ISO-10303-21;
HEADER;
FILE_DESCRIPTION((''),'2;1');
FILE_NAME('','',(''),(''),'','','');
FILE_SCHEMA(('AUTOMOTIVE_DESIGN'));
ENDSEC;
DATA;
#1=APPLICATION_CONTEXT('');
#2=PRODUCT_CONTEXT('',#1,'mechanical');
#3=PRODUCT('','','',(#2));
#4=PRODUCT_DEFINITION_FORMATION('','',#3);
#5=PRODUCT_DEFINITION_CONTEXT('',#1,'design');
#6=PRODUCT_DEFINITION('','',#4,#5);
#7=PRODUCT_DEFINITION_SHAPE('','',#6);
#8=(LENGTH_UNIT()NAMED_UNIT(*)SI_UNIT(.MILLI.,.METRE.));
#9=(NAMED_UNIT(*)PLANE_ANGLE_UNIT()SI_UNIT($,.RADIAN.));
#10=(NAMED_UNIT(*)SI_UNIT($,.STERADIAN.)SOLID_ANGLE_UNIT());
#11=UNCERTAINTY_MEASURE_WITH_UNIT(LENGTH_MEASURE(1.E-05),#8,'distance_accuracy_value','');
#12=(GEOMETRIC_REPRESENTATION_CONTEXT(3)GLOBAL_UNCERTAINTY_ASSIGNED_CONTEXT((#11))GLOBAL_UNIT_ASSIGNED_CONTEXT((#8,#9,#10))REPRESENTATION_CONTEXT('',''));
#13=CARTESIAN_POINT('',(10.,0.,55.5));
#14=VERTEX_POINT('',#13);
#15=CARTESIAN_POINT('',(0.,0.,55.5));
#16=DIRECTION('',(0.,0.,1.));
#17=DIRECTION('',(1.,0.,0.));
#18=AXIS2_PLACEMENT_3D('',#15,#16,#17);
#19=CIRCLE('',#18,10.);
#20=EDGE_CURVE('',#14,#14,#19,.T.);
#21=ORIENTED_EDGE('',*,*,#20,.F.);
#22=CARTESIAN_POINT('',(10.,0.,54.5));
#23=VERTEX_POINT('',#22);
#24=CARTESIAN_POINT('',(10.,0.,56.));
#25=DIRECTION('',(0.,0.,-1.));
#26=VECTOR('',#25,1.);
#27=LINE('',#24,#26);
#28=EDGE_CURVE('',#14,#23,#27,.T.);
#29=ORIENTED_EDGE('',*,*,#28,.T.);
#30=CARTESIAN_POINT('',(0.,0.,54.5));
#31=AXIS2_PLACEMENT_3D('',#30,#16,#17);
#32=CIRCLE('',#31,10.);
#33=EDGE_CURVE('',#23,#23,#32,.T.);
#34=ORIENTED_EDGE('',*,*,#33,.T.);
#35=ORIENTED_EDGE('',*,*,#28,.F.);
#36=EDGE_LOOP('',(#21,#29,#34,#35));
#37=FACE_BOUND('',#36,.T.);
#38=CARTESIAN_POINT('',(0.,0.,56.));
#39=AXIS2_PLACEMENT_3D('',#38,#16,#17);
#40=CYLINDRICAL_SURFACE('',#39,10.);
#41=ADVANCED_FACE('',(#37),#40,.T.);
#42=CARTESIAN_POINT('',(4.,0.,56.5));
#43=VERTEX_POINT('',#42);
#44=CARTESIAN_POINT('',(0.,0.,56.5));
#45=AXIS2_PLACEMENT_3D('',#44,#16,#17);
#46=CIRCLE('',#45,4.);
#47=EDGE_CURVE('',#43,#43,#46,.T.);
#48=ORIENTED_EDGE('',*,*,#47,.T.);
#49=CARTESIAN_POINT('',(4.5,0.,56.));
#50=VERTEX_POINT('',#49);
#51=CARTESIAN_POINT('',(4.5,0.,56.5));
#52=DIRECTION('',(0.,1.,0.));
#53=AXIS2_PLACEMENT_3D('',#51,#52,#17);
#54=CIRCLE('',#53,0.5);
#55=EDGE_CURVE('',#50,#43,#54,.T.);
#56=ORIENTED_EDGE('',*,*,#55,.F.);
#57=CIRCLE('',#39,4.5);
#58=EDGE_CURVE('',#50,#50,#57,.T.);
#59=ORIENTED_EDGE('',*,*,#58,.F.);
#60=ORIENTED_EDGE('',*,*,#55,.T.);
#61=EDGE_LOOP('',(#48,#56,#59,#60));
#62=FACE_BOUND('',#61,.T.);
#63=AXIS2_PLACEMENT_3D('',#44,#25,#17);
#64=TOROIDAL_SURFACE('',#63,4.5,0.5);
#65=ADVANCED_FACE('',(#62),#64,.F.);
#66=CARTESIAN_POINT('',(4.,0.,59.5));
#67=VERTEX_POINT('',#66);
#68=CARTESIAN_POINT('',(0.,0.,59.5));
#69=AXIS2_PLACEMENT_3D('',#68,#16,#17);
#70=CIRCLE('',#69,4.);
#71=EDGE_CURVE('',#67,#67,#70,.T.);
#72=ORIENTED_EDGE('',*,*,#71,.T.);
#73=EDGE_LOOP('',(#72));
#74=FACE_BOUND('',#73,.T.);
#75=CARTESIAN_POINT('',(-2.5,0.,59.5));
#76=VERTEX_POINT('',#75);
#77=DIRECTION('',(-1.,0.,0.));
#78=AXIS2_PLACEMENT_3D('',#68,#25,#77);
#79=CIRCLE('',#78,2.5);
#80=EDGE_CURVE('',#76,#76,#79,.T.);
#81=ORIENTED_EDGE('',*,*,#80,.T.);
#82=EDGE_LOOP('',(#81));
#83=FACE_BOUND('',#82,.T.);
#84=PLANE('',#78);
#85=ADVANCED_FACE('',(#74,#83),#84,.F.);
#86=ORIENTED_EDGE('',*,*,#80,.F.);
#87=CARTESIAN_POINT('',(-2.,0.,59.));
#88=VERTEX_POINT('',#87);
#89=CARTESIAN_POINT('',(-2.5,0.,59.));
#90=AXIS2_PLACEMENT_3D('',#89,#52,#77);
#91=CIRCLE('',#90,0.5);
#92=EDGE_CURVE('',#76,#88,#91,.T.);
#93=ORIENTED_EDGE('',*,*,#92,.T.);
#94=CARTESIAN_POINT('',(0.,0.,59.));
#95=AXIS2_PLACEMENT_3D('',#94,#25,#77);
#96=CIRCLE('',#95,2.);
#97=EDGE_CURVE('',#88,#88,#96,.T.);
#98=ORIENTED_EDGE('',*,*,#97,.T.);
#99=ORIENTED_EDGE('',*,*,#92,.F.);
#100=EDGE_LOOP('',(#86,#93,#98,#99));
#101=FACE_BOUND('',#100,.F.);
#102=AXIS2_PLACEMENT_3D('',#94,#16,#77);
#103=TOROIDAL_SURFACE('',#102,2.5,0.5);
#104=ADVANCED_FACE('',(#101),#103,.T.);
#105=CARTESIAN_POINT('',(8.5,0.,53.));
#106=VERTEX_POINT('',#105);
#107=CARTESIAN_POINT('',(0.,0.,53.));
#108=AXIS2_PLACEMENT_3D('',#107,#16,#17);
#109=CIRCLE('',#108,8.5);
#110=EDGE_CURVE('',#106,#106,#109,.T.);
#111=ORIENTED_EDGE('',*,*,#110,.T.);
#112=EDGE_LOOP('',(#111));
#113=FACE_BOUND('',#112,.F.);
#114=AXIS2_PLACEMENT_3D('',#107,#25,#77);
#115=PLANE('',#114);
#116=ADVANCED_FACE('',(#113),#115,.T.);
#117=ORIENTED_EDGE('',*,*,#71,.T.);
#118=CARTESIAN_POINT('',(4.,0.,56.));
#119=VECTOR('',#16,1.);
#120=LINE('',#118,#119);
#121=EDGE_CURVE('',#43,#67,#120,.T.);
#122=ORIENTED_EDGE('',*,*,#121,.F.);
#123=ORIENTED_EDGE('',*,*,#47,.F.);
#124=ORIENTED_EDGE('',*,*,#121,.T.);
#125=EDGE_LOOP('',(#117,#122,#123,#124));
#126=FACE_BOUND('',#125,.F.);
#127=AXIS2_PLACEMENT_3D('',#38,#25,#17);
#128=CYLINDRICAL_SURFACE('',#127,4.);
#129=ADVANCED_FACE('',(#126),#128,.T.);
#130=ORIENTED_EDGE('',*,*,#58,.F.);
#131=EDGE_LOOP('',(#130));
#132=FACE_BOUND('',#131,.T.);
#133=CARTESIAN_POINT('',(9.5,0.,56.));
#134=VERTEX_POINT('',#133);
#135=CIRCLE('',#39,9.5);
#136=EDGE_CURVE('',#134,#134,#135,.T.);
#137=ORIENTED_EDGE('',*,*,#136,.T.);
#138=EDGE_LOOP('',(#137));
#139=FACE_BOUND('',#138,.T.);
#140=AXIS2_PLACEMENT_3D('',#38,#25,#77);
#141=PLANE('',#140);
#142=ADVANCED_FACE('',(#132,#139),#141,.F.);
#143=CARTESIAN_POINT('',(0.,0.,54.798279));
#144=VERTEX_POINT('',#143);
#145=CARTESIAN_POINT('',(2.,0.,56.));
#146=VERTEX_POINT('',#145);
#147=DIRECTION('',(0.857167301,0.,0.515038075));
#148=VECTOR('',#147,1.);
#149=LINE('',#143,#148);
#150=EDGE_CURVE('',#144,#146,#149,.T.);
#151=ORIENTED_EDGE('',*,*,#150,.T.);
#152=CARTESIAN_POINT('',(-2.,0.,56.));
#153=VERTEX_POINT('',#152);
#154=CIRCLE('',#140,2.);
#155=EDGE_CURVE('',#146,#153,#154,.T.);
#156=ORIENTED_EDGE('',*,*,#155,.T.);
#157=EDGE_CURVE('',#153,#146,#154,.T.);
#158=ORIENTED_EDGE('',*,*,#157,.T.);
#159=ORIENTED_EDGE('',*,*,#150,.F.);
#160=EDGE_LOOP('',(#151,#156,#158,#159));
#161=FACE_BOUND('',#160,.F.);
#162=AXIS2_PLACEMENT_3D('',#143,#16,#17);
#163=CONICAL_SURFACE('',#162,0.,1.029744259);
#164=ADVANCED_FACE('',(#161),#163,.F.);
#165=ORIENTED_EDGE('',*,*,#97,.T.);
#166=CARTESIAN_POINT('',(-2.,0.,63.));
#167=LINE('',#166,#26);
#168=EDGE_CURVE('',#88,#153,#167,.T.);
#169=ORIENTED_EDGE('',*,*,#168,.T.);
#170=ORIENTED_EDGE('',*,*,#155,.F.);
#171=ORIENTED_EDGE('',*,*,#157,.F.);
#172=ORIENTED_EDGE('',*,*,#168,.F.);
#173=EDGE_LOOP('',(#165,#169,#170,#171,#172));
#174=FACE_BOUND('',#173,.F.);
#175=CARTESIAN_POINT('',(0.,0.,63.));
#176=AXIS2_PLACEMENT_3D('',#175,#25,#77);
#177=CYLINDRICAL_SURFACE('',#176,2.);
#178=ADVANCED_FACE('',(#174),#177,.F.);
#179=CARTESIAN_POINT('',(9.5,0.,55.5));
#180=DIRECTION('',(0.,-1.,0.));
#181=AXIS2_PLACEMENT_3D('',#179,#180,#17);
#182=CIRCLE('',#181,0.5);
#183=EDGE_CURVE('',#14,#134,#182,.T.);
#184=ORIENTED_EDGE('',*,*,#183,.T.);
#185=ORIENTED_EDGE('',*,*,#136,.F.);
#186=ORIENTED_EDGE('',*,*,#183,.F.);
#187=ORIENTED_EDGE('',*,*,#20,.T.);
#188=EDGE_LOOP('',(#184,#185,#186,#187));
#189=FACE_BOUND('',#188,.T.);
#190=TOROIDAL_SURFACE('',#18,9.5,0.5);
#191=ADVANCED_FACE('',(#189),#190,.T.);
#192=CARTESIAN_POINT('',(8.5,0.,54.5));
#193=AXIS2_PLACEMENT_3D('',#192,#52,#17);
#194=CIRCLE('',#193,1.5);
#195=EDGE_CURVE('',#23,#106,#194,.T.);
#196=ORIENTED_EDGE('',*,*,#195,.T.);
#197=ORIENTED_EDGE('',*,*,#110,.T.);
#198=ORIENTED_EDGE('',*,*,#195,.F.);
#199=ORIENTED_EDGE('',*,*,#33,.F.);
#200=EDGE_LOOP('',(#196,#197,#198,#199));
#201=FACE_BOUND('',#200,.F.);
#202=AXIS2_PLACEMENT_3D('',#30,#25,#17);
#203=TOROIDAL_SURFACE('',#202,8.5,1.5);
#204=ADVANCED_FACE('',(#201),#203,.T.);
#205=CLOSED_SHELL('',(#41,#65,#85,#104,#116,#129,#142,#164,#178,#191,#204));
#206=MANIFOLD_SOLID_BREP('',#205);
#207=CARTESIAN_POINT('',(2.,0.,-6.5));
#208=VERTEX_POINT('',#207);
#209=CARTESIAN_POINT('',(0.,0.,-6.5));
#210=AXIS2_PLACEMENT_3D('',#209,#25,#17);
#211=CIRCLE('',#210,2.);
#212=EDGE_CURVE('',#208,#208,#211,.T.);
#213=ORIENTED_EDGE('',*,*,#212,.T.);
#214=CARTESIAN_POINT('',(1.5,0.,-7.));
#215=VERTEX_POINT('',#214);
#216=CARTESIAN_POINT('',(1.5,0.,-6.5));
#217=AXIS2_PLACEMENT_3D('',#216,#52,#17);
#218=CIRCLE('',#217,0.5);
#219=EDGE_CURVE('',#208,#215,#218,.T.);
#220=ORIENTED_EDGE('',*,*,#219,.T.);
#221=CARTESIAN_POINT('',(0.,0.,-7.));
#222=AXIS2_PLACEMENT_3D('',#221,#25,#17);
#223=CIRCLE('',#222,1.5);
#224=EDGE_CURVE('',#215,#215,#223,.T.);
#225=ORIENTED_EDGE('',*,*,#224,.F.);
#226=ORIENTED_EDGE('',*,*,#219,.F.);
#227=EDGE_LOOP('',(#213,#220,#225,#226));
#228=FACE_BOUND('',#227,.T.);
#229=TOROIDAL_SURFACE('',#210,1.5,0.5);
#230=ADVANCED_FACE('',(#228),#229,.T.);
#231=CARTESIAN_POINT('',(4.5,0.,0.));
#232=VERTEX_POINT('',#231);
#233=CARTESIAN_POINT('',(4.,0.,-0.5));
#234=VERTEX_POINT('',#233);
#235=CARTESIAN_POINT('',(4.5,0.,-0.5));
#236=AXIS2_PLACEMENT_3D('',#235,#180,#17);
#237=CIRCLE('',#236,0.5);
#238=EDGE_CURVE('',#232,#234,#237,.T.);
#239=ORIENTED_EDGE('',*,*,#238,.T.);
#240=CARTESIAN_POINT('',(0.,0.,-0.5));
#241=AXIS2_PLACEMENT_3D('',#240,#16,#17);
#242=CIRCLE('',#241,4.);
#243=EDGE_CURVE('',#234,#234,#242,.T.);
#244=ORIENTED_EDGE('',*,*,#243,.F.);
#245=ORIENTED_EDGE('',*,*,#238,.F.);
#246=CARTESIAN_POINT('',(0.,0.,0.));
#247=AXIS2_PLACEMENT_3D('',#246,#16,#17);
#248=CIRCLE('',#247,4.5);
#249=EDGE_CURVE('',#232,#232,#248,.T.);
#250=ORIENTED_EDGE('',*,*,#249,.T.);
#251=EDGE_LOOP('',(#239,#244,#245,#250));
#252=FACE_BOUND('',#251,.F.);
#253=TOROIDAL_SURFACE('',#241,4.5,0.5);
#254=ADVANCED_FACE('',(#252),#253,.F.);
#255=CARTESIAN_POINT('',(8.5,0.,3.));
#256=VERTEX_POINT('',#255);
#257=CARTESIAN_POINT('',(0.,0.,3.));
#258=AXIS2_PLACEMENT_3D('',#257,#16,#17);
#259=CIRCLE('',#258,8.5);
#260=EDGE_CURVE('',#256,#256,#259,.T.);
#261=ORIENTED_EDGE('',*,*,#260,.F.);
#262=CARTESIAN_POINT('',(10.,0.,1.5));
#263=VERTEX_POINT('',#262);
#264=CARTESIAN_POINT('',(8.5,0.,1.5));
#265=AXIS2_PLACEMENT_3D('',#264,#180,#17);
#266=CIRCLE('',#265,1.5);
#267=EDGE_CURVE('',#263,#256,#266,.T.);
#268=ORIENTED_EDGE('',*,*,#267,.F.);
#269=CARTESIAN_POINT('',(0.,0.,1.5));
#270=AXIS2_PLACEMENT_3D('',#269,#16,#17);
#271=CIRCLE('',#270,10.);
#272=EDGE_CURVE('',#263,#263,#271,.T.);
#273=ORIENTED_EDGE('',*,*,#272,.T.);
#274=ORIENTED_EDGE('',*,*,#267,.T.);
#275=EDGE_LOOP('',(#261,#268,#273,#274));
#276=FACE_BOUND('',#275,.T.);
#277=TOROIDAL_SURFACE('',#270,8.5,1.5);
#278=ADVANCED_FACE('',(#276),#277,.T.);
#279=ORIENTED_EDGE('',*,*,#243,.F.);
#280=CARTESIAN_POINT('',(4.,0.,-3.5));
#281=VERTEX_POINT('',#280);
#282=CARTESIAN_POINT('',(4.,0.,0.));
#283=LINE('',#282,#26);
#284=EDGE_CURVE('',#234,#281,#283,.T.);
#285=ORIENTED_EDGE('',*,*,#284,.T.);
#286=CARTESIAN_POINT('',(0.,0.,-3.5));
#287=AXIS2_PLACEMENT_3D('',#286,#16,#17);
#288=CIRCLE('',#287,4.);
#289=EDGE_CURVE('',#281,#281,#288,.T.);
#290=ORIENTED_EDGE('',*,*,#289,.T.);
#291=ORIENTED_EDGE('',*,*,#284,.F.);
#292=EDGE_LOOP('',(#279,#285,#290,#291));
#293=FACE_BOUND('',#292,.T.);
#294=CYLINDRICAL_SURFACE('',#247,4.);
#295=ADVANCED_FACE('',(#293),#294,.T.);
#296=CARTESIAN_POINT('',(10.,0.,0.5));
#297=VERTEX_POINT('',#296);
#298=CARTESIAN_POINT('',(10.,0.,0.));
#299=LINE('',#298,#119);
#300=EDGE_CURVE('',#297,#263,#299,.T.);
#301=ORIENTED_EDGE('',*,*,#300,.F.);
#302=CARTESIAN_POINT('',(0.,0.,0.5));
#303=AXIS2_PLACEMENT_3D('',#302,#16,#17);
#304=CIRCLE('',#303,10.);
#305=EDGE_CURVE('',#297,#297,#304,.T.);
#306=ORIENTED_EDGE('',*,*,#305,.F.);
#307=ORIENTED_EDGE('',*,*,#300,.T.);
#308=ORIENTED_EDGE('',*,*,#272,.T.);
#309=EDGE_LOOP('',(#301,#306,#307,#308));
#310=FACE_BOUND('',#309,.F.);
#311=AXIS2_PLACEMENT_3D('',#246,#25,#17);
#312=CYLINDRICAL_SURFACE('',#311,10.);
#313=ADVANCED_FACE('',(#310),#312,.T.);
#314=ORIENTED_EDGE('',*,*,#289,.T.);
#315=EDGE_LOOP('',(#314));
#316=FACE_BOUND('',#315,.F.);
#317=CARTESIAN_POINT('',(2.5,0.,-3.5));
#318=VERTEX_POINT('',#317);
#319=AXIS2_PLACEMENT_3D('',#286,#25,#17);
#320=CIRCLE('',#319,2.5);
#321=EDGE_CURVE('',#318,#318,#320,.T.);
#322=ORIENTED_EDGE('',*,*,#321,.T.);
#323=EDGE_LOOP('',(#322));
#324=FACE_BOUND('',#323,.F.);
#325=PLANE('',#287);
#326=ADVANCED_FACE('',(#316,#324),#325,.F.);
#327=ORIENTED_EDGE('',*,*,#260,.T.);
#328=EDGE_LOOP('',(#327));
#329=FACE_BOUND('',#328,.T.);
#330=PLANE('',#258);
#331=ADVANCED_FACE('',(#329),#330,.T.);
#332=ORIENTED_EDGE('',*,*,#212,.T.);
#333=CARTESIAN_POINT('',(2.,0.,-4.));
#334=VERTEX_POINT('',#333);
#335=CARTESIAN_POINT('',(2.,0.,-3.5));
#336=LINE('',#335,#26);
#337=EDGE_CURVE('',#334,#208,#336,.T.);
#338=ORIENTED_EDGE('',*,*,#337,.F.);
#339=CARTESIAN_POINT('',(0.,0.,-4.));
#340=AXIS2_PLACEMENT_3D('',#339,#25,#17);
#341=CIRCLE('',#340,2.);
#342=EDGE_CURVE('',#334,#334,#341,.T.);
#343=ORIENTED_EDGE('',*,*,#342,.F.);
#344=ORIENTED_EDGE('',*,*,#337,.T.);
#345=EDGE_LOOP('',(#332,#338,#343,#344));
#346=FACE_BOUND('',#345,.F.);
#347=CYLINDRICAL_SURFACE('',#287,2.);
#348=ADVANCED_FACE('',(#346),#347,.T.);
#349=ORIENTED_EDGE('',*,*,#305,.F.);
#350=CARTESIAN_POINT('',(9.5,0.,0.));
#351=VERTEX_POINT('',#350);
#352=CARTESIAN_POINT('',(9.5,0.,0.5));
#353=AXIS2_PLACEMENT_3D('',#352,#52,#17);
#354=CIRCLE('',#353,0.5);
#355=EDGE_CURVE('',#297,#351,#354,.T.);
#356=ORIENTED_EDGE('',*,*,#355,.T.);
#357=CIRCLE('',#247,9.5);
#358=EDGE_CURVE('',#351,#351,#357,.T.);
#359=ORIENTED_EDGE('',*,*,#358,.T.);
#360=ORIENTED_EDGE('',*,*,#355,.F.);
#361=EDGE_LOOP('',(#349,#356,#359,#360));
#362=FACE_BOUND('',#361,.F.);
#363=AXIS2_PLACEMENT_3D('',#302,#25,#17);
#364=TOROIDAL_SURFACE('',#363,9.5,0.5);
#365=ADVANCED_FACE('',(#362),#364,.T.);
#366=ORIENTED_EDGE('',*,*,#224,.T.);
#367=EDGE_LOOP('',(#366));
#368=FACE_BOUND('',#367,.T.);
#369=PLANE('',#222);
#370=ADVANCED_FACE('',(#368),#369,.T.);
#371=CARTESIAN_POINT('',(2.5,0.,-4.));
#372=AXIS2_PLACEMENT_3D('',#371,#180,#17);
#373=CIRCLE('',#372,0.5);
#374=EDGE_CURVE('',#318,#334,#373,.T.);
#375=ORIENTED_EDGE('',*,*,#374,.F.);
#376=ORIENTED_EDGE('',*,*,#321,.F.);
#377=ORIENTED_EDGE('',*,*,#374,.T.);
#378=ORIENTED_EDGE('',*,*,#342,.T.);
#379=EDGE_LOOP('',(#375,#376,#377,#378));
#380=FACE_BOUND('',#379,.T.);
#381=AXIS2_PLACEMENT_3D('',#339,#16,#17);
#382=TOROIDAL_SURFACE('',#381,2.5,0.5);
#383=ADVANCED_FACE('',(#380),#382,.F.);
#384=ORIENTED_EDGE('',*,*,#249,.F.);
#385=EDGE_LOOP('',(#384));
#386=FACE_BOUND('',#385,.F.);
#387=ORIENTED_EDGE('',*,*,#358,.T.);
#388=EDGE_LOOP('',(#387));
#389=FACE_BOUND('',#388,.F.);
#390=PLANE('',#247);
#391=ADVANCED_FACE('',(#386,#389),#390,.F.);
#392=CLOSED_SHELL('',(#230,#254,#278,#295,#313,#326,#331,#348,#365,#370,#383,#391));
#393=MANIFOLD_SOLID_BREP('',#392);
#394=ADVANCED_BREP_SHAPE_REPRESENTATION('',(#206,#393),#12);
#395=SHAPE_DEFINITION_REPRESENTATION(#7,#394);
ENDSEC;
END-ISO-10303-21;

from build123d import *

# Parameters (mm, degrees)
F0_R     = 10
F0_R_2   = 4
F1_DEPTH = 3
F2_DEPTH = 3.5
F5_R     = 2
F6_DEPTH = 3.5
F8_D     = 4
F8_DEPTH = 3.5
F8_TIP   = 1.2017212381
F9_R     = 0.5
F9_2_R   = 0.5
F10_R    = 1.5
F10_2_R  = 1.5


with BuildPart() as f1:
    # F0 (on Top) → F1 (new body)
    with BuildSketch(Plane.XY):
        Circle(F0_R)
        Circle(F0_R_2, mode=Mode.SUBTRACT)
        Circle(F0_R_2)
    extrude(amount=F1_DEPTH)

    # F0 (on Top) → F2 (join)
    with BuildSketch(Plane.XY):
        Circle(F0_R_2)
    extrude(amount=-F2_DEPTH)


with BuildPart() as f4_1:
    # F4: instance of F1
    add(f1.part.mirror(Plane.XY.offset(28)))

    # F8
    with Locations(Plane.XY.offset(59.5)):
        with Locations((0, 0)):
            Hole(F8_D / 2, depth=F8_DEPTH)
            with Locations((0, 0, -(F8_DEPTH + F8_TIP / 2))):  # 118° drill point
                Cone(0, F8_D / 2, F8_TIP, mode=Mode.SUBTRACT)

    # F9#2
    f9_2_edges = [f4_1.edges().sort_by_distance(p)[0] for p in [
        (-10, 0, 56),
        (-4, 0, 56),
        (-2, 0, 59.5),
    ]]
    fillet(f9_2_edges, radius=F9_2_R)

    # F10#2
    f10_2_edges = [f4_1.edges().sort_by_distance(p)[0] for p in [
        (-10, 0, 53),
    ]]
    fillet(f10_2_edges, radius=F10_2_R)


with BuildPart() as f1_1:
    add(f1.part)

    # F5 (on face) → F6 (join)
    with BuildSketch(Plane(origin=(0, 0, -3.5), x_dir=(1, 0, 0), z_dir=(0, 0, -1))):
        Circle(F5_R)
    extrude(amount=F6_DEPTH)

    # F9
    f9_edges = [f1_1.edges().sort_by_distance(p)[0] for p in [
        (-2, 0, -7),
        (-2, 0, -3.5),
        (-4, 0, 0),
        (-10, 0, 0),
    ]]
    fillet(f9_edges, radius=F9_R)

    # F10
    f10_edges = [f1_1.edges().sort_by_distance(p)[0] for p in [
        (-10, 0, 3),
    ]]
    fillet(f10_edges, radius=F10_R)


solid = Compound([f4_1.part, f1_1.part])
